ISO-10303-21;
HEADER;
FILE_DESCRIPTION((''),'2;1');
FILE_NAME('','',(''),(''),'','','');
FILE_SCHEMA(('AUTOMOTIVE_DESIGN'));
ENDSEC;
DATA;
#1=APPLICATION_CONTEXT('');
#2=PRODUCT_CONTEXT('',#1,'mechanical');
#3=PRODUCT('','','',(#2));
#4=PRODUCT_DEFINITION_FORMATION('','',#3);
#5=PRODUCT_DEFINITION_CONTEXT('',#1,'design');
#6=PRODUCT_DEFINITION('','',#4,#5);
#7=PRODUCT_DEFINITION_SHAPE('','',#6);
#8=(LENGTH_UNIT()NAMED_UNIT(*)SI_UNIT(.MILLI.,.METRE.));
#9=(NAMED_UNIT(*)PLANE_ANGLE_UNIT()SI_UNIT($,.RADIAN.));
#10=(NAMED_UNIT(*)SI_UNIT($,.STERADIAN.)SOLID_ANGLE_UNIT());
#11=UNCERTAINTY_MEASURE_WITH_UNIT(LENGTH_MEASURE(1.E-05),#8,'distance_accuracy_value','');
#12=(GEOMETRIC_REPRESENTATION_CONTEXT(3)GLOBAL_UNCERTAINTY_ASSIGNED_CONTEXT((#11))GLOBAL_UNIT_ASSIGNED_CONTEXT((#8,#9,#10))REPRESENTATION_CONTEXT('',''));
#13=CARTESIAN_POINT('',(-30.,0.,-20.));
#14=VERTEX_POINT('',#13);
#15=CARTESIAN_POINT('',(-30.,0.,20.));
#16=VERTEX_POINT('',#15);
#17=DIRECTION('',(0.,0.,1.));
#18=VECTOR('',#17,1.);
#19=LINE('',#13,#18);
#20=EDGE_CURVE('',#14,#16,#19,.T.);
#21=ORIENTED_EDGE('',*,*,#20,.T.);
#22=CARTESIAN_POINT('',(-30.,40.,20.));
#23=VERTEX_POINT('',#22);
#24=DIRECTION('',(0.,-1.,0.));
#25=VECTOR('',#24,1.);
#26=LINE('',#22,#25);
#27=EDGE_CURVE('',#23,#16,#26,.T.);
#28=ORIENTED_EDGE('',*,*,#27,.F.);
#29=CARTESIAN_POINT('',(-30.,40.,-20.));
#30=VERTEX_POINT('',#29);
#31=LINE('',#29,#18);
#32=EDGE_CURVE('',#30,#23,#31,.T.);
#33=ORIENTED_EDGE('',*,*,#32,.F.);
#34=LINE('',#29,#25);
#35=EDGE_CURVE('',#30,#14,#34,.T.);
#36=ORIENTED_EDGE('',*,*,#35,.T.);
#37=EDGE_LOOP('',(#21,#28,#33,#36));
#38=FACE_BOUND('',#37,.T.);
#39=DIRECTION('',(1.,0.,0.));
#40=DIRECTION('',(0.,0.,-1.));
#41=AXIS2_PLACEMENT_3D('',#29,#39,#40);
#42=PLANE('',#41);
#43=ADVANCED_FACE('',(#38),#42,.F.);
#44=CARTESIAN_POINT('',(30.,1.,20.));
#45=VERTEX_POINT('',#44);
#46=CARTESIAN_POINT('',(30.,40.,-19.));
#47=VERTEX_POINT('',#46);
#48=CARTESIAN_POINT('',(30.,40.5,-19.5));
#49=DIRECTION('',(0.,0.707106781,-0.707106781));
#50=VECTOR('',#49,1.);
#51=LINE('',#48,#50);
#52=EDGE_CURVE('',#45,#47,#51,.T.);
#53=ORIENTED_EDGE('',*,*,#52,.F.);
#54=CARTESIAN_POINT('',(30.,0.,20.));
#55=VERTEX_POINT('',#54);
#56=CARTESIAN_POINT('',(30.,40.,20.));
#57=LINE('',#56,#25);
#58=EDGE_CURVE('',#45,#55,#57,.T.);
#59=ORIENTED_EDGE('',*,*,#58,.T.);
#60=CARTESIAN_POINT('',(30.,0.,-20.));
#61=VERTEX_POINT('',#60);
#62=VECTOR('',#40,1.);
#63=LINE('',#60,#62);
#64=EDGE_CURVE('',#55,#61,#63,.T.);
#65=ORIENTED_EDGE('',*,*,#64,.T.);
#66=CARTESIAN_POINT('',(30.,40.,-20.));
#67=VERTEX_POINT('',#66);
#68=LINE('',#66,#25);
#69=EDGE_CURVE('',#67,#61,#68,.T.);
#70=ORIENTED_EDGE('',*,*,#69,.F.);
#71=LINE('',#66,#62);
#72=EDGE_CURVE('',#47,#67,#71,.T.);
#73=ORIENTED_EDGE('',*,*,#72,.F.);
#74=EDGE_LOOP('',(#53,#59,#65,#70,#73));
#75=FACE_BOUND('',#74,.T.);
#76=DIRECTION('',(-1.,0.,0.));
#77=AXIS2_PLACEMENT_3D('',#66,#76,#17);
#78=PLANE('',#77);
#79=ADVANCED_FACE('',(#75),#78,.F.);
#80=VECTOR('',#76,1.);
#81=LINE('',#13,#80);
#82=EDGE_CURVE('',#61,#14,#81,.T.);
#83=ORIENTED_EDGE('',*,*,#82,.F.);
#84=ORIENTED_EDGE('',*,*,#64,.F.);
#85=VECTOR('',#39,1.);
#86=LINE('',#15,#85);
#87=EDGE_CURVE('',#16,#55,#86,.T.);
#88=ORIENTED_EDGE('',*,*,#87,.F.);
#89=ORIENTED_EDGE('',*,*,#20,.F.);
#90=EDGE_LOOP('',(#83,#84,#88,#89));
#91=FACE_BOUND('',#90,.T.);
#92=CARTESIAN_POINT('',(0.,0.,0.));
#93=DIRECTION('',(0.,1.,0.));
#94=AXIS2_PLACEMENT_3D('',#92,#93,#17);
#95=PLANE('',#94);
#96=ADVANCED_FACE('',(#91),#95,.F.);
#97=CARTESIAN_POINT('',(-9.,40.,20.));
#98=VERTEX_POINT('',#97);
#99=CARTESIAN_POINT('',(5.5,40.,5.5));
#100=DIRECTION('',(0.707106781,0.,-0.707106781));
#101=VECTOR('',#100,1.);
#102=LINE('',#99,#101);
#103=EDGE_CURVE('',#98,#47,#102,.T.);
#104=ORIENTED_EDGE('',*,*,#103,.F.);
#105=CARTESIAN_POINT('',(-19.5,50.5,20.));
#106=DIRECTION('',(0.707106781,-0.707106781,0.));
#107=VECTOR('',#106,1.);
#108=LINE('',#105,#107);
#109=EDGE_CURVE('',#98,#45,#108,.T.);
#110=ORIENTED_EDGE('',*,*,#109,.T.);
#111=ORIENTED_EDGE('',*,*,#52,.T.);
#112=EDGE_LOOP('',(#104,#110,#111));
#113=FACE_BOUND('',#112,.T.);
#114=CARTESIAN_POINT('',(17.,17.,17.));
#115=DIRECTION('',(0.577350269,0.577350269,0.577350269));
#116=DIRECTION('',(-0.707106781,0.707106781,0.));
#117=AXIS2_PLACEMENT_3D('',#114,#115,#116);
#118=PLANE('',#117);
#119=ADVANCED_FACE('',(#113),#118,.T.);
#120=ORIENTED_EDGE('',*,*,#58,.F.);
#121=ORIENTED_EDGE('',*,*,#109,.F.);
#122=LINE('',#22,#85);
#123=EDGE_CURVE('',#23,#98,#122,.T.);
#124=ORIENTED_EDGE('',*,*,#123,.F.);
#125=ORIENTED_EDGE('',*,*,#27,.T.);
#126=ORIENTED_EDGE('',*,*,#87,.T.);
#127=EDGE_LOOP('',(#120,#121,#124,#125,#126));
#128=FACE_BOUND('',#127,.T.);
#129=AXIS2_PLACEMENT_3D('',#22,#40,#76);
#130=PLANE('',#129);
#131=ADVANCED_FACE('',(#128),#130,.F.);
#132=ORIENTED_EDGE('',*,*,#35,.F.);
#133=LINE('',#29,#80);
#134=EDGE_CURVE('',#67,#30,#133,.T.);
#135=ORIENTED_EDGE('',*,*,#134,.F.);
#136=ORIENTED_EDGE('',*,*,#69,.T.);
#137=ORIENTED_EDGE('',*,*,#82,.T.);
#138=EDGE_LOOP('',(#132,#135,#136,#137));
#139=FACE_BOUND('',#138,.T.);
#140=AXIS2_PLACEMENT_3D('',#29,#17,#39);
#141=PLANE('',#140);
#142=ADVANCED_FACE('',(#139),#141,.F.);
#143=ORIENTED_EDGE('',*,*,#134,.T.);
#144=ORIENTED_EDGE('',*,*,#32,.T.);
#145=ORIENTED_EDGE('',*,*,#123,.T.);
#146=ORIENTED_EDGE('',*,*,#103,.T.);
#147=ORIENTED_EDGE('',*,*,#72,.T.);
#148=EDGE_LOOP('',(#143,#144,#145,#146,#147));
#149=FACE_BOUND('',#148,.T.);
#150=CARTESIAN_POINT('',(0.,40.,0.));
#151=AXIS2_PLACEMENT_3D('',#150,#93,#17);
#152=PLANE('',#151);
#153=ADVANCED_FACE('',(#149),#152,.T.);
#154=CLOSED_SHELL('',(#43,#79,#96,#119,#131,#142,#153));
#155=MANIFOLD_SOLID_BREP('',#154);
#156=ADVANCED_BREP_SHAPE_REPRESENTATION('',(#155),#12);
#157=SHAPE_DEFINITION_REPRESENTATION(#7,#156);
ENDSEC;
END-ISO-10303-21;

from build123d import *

# Parameters (mm, degrees)
CROQUIS1_W              = 60
CROQUIS1_H              = 40
SALIENTE_EXTRUIR1_DEPTH = 40
CHAFL_N1_START          = -14.142135624
CHAFL_N1_DEPTH          = 56.568542495


with BuildPart() as part:
    # Croquis1 → Saliente-Extruir1 (new body)
    with BuildSketch(Plane(origin=(0, 0, 0), x_dir=(1, 0, 0), z_dir=(0, 1, 0))):
        Rectangle(CROQUIS1_W, CROQUIS1_H)
    extrude(amount=SALIENTE_EXTRUIR1_DEPTH)

    # Chaflán1: read off the stored shape, not the designer's step
    # Chaflán1 outline → Chaflán1 (cut)
    with BuildSketch(Plane(origin=(0, 0, 0), x_dir=(1, 0, 0), z_dir=(0, 0.7071067811865476, -0.7071067811865476)).offset(CHAFL_N1_START)):
        Polygon((30, -14.849242405), (-9, -42.426406871), (-10, -43.133513652), (-10, -44), (30, -44), align=None)
    extrude(amount=CHAFL_N1_DEPTH, mode=Mode.SUBTRACT)


solid = part.part
